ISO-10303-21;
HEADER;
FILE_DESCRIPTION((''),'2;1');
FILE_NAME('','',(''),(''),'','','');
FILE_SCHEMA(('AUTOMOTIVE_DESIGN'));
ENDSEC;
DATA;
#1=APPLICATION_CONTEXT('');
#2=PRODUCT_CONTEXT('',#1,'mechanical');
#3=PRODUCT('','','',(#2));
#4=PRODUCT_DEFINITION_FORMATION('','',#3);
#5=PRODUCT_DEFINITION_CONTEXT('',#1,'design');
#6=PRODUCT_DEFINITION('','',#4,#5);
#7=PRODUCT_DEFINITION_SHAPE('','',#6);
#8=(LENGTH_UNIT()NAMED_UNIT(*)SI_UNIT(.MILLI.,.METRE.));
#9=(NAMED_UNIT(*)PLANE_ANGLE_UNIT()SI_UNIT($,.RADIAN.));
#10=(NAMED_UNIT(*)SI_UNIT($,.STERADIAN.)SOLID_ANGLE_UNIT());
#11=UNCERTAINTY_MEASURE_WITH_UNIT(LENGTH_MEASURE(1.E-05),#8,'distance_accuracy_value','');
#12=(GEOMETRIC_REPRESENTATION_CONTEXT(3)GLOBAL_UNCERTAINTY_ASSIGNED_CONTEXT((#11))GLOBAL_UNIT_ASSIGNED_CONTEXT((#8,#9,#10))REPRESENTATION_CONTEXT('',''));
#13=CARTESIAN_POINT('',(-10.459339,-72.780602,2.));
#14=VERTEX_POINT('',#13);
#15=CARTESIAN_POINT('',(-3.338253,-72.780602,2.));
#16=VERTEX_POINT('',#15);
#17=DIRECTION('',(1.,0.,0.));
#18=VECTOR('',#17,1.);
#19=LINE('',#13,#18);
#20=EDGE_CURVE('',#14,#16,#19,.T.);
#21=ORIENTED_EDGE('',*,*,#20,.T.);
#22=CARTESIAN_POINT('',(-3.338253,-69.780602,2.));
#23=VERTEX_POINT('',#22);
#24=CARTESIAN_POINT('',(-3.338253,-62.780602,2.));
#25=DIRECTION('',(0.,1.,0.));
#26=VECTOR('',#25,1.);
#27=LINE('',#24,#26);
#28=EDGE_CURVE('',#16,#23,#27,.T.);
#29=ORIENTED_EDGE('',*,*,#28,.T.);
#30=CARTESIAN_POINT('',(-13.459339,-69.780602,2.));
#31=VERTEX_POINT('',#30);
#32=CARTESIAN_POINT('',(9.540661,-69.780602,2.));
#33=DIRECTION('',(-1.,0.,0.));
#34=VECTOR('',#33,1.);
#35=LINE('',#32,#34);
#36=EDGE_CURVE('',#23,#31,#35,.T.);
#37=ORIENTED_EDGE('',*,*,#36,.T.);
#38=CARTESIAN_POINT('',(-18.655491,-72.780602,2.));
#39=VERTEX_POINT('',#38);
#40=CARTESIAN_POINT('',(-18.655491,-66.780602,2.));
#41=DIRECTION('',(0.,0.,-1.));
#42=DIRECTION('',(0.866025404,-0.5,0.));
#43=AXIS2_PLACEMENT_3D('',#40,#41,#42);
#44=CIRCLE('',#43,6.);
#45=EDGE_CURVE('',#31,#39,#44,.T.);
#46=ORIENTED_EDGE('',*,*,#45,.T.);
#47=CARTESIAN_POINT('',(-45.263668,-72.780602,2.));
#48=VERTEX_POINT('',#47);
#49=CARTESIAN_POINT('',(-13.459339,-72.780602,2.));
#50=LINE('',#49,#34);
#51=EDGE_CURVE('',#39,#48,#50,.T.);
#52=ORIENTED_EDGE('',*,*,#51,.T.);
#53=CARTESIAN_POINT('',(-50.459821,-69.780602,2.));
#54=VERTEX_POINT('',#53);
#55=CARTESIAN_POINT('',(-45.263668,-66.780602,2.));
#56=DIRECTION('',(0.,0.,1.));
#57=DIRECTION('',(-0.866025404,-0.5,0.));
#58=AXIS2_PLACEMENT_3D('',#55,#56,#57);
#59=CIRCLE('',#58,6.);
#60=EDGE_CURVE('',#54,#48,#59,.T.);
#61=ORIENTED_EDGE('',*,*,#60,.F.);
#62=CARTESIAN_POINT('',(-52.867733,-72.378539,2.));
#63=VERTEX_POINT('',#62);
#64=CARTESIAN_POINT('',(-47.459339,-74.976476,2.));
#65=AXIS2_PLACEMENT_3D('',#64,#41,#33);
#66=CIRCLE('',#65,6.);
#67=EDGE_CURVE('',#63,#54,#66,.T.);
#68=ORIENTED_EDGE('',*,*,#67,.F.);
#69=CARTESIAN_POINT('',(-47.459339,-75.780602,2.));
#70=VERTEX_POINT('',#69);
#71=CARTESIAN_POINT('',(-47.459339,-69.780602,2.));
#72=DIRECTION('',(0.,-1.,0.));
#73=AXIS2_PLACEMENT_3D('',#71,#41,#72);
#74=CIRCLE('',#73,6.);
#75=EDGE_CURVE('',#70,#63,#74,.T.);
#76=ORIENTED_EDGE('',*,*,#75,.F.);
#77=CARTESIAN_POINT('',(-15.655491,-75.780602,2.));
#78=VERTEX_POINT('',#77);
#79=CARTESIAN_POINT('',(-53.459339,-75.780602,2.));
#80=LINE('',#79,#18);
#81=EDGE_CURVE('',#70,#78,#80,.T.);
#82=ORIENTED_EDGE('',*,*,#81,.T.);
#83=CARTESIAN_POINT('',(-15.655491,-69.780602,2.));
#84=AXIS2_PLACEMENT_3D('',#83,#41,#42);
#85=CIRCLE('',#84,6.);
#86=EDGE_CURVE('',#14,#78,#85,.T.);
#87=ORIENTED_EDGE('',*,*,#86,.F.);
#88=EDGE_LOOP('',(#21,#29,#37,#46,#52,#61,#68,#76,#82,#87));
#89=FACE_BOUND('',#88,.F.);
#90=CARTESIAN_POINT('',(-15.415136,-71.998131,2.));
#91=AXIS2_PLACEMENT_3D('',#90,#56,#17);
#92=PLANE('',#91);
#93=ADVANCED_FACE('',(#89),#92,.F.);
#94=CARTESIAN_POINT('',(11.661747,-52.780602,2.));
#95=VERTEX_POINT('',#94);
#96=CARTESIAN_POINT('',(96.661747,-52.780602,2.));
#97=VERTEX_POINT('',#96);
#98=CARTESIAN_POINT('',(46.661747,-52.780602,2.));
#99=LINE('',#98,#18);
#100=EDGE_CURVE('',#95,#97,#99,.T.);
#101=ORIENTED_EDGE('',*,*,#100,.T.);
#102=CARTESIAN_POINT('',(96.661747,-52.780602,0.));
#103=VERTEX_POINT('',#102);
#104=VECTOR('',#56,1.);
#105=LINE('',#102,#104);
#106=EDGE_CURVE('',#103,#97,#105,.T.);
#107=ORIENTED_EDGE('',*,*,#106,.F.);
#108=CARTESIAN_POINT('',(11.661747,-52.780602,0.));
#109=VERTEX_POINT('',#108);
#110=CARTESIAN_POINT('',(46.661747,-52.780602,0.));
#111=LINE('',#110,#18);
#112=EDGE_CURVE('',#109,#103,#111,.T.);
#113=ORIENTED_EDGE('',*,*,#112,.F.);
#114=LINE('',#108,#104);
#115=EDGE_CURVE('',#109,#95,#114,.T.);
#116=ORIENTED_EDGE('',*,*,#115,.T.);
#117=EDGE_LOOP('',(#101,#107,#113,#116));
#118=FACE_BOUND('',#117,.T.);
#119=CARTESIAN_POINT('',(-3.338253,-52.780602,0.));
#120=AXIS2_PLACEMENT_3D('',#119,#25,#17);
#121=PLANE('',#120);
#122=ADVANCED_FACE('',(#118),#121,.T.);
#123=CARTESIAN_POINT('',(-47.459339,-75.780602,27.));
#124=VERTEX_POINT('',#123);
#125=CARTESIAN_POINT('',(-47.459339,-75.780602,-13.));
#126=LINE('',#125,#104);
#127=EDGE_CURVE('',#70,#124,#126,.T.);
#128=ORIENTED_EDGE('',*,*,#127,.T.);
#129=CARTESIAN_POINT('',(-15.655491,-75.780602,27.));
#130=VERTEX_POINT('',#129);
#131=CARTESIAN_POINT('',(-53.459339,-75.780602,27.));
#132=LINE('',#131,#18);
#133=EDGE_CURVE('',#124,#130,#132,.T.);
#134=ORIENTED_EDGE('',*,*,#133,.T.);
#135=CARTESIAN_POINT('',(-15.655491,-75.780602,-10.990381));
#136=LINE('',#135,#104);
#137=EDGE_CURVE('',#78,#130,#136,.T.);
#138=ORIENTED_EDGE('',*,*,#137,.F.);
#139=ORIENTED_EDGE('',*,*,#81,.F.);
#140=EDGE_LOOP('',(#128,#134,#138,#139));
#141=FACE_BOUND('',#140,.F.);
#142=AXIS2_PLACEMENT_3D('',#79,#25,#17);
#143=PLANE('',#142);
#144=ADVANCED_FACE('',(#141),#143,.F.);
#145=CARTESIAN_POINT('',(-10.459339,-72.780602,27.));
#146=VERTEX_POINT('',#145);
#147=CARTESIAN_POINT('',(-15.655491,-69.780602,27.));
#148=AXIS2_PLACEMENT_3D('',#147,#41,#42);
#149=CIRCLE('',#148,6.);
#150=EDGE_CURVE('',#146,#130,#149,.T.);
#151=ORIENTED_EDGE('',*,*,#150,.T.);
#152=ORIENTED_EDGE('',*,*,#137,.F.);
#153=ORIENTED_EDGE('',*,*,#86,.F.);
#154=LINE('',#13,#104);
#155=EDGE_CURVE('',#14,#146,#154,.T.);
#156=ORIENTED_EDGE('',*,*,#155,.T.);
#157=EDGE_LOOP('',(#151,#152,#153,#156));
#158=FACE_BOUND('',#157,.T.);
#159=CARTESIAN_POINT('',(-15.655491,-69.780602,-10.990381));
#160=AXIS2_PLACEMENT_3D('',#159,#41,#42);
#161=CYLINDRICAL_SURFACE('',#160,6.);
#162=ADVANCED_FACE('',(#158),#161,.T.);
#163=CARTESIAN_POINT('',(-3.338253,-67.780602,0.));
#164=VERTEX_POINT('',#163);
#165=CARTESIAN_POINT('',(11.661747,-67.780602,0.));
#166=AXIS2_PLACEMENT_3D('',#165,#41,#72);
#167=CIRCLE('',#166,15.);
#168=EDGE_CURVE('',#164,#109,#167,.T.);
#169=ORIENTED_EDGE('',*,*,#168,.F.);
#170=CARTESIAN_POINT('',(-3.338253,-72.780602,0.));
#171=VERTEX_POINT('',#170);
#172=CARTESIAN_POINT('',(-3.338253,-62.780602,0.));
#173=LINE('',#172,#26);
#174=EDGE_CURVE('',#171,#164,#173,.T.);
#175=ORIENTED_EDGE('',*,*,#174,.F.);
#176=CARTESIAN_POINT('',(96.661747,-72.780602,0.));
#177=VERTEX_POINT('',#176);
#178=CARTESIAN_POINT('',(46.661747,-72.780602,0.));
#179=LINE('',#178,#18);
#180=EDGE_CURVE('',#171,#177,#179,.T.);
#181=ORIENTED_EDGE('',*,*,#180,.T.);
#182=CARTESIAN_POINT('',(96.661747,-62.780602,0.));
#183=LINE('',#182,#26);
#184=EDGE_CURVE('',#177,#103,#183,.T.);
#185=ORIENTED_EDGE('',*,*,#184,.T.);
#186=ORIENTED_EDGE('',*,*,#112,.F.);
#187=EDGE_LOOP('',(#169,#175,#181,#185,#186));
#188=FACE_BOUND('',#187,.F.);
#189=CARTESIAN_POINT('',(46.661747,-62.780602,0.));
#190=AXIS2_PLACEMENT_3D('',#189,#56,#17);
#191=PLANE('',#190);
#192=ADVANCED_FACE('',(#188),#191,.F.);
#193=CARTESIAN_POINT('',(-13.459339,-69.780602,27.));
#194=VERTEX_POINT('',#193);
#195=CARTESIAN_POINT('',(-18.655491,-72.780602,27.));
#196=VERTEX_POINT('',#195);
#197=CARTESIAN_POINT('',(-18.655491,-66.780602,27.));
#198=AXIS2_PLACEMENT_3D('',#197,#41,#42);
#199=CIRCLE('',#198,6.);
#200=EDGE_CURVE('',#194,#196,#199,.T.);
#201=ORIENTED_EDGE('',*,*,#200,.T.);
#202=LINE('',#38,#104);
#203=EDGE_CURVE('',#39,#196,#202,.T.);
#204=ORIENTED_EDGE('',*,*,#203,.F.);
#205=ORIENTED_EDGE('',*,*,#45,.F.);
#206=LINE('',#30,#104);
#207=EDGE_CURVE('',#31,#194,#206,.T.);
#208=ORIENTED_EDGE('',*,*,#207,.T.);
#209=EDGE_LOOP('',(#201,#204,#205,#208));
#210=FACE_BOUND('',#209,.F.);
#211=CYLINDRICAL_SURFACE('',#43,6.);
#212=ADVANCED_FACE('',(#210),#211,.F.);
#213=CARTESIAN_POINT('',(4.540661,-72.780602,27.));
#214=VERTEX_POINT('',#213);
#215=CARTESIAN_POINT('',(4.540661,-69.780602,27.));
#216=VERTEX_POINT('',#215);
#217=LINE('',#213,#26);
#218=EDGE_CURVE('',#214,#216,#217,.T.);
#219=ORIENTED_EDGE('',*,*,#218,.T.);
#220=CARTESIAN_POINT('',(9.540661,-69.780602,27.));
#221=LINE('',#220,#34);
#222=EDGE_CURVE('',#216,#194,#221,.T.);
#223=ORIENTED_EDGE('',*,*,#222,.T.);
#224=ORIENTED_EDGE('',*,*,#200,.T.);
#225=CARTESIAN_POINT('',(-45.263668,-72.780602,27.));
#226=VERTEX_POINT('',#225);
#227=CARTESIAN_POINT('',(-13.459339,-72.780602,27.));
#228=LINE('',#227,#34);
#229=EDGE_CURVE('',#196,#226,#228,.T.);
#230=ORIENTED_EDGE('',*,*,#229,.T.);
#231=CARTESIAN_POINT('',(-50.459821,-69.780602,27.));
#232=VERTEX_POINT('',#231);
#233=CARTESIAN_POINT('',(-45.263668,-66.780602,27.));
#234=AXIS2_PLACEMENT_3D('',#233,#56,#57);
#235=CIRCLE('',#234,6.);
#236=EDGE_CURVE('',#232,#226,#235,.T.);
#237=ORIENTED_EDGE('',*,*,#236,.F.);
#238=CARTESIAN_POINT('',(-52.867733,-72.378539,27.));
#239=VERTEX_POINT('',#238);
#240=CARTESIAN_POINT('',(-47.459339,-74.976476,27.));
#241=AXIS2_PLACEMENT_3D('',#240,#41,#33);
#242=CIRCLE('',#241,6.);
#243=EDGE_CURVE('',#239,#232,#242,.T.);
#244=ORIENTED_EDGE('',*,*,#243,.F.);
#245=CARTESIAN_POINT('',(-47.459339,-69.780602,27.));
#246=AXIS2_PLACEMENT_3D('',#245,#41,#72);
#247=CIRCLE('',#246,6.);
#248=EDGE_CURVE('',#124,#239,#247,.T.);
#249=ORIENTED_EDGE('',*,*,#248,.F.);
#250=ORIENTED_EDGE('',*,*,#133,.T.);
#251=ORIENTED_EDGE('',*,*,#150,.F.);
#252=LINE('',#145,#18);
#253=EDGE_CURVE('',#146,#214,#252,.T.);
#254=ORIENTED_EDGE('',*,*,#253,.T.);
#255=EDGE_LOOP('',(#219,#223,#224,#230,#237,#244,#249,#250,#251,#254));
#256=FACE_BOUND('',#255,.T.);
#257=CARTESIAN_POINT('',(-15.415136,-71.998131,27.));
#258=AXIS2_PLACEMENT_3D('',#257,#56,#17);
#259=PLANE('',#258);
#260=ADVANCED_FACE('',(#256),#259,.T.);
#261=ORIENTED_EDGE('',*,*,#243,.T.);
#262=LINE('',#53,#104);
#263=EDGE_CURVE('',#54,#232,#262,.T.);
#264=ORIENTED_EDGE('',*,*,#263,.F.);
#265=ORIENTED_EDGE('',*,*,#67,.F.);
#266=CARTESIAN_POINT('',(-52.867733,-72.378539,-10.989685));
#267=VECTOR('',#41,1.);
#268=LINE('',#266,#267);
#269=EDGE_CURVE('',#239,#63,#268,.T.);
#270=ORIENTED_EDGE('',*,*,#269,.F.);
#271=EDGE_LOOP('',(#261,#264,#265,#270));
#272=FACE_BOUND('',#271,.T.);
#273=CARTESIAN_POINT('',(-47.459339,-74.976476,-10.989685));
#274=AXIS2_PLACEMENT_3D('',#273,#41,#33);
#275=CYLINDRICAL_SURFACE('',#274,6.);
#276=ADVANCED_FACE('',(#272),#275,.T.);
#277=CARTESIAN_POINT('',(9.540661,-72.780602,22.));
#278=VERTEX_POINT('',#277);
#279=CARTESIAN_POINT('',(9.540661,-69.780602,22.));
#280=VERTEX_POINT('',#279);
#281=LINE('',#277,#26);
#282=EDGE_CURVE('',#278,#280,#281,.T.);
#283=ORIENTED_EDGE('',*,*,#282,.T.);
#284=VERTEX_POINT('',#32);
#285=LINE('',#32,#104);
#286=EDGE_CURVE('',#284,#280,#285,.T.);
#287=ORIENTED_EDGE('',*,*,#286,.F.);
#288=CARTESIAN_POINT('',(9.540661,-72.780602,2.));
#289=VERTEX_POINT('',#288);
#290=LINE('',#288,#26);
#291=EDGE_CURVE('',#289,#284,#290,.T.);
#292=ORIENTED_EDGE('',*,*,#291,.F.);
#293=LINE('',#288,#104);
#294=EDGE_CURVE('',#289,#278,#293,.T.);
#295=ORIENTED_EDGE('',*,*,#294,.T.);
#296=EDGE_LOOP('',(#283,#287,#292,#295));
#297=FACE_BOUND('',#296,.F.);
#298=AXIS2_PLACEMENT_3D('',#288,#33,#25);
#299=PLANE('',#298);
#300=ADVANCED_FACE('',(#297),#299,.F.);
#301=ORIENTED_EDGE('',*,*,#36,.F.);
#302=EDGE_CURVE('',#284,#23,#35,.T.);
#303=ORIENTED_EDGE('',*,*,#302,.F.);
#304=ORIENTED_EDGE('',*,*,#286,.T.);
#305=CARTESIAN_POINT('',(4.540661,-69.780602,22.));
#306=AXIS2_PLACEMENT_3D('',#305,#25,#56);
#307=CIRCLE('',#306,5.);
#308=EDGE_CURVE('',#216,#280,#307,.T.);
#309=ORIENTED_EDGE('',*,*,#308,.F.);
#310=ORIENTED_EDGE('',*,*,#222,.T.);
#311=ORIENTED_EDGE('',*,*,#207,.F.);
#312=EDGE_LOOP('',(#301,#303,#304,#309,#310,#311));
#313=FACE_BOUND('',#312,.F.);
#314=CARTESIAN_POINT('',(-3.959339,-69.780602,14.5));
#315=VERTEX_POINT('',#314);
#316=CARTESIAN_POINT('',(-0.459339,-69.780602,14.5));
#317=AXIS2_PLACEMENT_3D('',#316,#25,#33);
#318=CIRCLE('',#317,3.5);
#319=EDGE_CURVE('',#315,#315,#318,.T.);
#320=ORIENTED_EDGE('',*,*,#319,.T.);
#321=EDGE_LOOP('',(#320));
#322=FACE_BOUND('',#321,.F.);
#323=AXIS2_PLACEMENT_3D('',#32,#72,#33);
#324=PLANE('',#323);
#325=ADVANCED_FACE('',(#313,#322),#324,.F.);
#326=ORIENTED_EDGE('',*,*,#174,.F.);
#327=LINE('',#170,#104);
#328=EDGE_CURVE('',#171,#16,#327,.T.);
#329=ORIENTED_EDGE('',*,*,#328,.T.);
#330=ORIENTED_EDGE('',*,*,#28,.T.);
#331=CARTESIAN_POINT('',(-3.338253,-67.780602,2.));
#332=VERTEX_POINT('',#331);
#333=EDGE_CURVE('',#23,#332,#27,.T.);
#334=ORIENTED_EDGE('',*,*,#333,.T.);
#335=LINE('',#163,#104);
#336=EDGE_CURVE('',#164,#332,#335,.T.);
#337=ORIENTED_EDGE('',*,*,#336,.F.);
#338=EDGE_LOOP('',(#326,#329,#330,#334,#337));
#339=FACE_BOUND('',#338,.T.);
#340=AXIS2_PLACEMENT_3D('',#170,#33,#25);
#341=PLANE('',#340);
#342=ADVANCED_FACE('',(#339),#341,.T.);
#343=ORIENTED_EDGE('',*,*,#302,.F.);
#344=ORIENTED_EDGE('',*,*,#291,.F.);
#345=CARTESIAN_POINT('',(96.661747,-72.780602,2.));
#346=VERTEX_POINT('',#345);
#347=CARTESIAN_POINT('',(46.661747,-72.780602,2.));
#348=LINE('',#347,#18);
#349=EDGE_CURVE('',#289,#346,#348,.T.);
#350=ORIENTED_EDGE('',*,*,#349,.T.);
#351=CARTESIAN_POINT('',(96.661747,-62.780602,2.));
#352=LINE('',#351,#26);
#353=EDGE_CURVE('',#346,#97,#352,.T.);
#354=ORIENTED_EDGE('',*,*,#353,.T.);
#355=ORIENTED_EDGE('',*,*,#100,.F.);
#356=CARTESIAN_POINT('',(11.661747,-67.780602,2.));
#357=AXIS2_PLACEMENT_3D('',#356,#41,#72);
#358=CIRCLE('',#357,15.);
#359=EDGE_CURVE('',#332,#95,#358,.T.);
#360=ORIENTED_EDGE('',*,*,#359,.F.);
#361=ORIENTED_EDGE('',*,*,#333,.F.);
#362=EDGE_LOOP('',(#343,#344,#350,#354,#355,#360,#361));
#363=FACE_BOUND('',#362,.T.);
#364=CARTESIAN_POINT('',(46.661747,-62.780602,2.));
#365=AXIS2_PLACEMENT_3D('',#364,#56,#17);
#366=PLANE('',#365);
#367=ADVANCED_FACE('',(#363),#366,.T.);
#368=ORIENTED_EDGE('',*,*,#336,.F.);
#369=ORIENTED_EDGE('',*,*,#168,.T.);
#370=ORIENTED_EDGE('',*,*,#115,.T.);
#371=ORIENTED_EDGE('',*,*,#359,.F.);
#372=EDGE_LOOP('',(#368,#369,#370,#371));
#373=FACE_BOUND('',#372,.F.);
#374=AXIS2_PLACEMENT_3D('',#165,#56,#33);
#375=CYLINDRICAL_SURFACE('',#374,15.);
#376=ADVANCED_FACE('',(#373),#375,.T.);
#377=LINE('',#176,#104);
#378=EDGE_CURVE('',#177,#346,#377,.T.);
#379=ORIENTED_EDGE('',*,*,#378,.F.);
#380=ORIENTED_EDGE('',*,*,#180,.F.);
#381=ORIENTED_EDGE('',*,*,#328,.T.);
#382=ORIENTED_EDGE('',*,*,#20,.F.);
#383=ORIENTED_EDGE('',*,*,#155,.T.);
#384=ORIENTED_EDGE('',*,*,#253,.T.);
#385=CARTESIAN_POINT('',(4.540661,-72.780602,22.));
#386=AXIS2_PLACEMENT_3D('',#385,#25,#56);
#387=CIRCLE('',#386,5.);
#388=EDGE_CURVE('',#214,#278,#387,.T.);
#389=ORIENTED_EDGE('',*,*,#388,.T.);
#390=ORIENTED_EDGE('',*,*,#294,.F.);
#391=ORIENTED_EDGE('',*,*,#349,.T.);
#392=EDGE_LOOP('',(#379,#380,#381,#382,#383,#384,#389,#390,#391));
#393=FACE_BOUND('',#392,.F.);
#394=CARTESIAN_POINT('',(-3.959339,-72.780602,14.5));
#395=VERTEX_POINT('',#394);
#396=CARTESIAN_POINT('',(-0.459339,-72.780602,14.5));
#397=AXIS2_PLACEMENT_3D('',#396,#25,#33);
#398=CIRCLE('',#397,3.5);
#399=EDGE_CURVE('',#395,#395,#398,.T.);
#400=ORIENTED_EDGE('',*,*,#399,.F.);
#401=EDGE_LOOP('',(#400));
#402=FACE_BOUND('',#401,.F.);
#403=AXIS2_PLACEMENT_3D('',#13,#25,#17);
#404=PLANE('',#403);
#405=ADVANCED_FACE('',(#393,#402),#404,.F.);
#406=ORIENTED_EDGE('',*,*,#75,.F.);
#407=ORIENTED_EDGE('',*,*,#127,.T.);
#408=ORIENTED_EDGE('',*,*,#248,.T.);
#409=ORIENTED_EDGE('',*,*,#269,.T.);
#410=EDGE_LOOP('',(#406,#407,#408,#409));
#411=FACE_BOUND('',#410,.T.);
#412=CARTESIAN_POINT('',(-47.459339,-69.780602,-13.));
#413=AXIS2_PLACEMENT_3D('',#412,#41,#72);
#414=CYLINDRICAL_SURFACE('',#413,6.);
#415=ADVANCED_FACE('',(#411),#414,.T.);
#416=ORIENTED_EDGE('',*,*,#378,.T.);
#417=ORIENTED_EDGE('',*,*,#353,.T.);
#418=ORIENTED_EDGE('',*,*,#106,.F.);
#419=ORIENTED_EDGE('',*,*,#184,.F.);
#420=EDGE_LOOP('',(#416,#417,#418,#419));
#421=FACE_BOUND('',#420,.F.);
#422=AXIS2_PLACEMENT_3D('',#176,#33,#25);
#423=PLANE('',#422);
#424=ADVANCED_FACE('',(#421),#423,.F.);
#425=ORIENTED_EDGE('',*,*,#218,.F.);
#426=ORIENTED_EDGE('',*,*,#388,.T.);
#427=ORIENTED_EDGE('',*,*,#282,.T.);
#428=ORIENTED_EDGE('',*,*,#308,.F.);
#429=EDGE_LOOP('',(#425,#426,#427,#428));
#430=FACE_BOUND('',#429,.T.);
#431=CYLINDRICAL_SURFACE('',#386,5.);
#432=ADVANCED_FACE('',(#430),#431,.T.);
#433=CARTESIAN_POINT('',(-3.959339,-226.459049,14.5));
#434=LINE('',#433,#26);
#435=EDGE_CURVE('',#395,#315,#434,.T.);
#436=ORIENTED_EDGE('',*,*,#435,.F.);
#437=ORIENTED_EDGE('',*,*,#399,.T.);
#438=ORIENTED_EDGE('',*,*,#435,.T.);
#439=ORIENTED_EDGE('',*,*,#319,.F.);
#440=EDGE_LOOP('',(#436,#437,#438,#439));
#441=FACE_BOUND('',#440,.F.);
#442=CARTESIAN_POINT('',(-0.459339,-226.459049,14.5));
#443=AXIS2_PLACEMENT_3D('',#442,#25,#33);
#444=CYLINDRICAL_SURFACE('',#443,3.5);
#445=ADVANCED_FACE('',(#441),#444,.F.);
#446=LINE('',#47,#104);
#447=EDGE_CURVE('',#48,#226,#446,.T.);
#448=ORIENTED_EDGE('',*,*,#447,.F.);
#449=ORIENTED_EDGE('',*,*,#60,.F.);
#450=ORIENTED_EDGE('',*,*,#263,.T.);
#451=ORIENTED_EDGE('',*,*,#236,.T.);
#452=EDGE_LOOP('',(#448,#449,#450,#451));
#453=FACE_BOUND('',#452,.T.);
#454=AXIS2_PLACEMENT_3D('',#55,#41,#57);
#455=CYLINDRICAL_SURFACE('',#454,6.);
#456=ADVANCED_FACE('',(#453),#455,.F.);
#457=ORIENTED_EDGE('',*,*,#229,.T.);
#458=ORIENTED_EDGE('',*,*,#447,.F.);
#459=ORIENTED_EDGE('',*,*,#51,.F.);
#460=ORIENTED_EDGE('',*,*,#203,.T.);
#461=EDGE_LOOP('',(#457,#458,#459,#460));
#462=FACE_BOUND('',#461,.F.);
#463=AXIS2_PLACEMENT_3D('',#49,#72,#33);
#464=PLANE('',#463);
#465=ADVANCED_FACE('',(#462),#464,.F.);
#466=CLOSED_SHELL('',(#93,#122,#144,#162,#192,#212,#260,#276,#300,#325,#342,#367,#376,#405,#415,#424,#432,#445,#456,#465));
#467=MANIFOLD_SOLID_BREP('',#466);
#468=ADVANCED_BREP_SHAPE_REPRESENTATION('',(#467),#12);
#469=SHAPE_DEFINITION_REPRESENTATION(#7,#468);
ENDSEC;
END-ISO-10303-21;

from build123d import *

# Parameters (mm, degrees)
F0_W        = 100
F0_H        = 20
F1_DEPTH    = 2
F2_R        = 15
F4_DEPTH    = 25
F5_T1_DEPTH = 25
F5_T3_DEPTH = 50.9807621135
F5_T5_DEPTH = 50.9793707428
F5_T7_DEPTH = 55
F6_R        = 5
F8_D        = 7


# Not quite as in the source:
# - a fillet or chamfer that OpenCascade refuses, or shapes differently, is made with other operations: its cross-section is extruded or revolved along the edge and cut away or added


with BuildPart() as f1:
    # F0 (on Top) → F1 (new body)
    with BuildSketch(Plane.XY):
        with Locations((46.6617465019, -62.7806016803)):
            Rectangle(F0_W, F0_H)
    extrude(amount=F1_DEPTH)

    # F2
    f2_edges = [f1.edges().sort_by_distance(p)[0] for p in [
        (-3.338253, -52.780602, 1),
    ]]
    fillet(f2_edges, radius=F2_R)

    # F3 (on face) → F4 (join)
    with BuildSketch(Plane.XY.offset(2)):
        Polygon((-10.4593388438, -72.7806016803), (9.5406611562, -72.7806016803), (9.5406611562, -69.7806016803), (-10.4593388438, -69.7806016803), (-13.4593388438, -69.7806016803), (-13.4593388438, -72.7806016803), (-50.4598207772, -72.7806016803), (-50.4598207772, -69.7806016803), (-53.4593388438, -69.7806016803), (-53.4593388438, -72.7806016803), (-53.4593388438, -75.7806016803), (-50.4598207772, -75.7806016803), (-13.4593388438, -75.7806016803), (-10.4593388438, -75.7806016803), align=None)
    extrude(amount=F4_DEPTH)

    # F5: fillet of radius 6 on 5 edges, made by hand

    # F5_s2 → F5_t1 (join)
    with BuildSketch(Plane.XY.offset(2)):
        with BuildLine():
            ThreePointArc((-13.4593388438, -69.7806016803), (-15.6554912665, -71.976754103), (-18.6554912665, -72.7806016803))
            Line((-18.6554912665, -72.7806016803), (-13.4593388438, -72.7806016803))
            Line((-13.4593388438, -72.7806016803), (-13.4593388438, -69.7806016803))
        make_face()
        with BuildLine():
            ThreePointArc((-50.4598207772, -69.7806016803), (-48.2636683545, -71.976754103), (-45.2636683545, -72.7806016803))
            Line((-45.2636683545, -72.7806016803), (-50.4598207772, -72.7806016803))
            Line((-50.4598207772, -72.7806016803), (-50.4598207772, -69.7806016803))
        make_face()
    extrude(amount=F5_T1_DEPTH)

    # F5_s4 → F5_t3 (cut)
    with BuildSketch(Plane.XY.offset(-10.9903810568)):
        with BuildLine():
            ThreePointArc((-10.4593388438, -72.7806016803), (-12.6554912665, -74.976754103), (-15.6554912665, -75.7806016803))
            Line((-15.6554912665, -75.7806016803), (-10.4593388438, -75.7806016803))
            Line((-10.4593388438, -75.7806016803), (-10.4593388438, -72.7806016803))
        make_face()
    extrude(amount=F5_T3_DEPTH, mode=Mode.SUBTRACT)

    # F5_s6 → F5_t5 (cut)
    with BuildSketch(Plane.XY.offset(-10.9896853714)):
        with BuildLine():
            ThreePointArc((-53.4593388438, -74.9764758288), (-52.6556303868, -71.9767168052), (-50.4598207772, -69.7806016803))
            Line((-50.4598207772, -69.7806016803), (-53.4593388438, -69.7806016803))
            Line((-53.4593388438, -69.7806016803), (-53.4593388438, -74.9764758288))
        make_face()
    extrude(amount=F5_T5_DEPTH, mode=Mode.SUBTRACT)

    # F5_s8 → F5_t7 (cut)
    with BuildSketch(Plane.XY.offset(-13)):
        with BuildLine():
            ThreePointArc((-47.4593388438, -75.7806016803), (-51.7019795309, -74.0232423674), (-53.4593388438, -69.7806016803))
            Line((-53.4593388438, -69.7806016803), (-53.4593388438, -75.7806016803))
            Line((-53.4593388438, -75.7806016803), (-47.4593388438, -75.7806016803))
        make_face()
    extrude(amount=F5_T7_DEPTH, mode=Mode.SUBTRACT)

    # F6
    f6_edges = [f1.edges().sort_by_distance(p)[0] for p in [
        (9.540661, -71.280602, 27),
    ]]
    fillet(f6_edges, radius=F6_R)

    # F8 (through all)
    with Locations(Plane.XZ.offset(72.7806016803)):
        with Locations((-0.4593388438, 14.5)):
            Hole(F8_D / 2)


solid = f1.part
